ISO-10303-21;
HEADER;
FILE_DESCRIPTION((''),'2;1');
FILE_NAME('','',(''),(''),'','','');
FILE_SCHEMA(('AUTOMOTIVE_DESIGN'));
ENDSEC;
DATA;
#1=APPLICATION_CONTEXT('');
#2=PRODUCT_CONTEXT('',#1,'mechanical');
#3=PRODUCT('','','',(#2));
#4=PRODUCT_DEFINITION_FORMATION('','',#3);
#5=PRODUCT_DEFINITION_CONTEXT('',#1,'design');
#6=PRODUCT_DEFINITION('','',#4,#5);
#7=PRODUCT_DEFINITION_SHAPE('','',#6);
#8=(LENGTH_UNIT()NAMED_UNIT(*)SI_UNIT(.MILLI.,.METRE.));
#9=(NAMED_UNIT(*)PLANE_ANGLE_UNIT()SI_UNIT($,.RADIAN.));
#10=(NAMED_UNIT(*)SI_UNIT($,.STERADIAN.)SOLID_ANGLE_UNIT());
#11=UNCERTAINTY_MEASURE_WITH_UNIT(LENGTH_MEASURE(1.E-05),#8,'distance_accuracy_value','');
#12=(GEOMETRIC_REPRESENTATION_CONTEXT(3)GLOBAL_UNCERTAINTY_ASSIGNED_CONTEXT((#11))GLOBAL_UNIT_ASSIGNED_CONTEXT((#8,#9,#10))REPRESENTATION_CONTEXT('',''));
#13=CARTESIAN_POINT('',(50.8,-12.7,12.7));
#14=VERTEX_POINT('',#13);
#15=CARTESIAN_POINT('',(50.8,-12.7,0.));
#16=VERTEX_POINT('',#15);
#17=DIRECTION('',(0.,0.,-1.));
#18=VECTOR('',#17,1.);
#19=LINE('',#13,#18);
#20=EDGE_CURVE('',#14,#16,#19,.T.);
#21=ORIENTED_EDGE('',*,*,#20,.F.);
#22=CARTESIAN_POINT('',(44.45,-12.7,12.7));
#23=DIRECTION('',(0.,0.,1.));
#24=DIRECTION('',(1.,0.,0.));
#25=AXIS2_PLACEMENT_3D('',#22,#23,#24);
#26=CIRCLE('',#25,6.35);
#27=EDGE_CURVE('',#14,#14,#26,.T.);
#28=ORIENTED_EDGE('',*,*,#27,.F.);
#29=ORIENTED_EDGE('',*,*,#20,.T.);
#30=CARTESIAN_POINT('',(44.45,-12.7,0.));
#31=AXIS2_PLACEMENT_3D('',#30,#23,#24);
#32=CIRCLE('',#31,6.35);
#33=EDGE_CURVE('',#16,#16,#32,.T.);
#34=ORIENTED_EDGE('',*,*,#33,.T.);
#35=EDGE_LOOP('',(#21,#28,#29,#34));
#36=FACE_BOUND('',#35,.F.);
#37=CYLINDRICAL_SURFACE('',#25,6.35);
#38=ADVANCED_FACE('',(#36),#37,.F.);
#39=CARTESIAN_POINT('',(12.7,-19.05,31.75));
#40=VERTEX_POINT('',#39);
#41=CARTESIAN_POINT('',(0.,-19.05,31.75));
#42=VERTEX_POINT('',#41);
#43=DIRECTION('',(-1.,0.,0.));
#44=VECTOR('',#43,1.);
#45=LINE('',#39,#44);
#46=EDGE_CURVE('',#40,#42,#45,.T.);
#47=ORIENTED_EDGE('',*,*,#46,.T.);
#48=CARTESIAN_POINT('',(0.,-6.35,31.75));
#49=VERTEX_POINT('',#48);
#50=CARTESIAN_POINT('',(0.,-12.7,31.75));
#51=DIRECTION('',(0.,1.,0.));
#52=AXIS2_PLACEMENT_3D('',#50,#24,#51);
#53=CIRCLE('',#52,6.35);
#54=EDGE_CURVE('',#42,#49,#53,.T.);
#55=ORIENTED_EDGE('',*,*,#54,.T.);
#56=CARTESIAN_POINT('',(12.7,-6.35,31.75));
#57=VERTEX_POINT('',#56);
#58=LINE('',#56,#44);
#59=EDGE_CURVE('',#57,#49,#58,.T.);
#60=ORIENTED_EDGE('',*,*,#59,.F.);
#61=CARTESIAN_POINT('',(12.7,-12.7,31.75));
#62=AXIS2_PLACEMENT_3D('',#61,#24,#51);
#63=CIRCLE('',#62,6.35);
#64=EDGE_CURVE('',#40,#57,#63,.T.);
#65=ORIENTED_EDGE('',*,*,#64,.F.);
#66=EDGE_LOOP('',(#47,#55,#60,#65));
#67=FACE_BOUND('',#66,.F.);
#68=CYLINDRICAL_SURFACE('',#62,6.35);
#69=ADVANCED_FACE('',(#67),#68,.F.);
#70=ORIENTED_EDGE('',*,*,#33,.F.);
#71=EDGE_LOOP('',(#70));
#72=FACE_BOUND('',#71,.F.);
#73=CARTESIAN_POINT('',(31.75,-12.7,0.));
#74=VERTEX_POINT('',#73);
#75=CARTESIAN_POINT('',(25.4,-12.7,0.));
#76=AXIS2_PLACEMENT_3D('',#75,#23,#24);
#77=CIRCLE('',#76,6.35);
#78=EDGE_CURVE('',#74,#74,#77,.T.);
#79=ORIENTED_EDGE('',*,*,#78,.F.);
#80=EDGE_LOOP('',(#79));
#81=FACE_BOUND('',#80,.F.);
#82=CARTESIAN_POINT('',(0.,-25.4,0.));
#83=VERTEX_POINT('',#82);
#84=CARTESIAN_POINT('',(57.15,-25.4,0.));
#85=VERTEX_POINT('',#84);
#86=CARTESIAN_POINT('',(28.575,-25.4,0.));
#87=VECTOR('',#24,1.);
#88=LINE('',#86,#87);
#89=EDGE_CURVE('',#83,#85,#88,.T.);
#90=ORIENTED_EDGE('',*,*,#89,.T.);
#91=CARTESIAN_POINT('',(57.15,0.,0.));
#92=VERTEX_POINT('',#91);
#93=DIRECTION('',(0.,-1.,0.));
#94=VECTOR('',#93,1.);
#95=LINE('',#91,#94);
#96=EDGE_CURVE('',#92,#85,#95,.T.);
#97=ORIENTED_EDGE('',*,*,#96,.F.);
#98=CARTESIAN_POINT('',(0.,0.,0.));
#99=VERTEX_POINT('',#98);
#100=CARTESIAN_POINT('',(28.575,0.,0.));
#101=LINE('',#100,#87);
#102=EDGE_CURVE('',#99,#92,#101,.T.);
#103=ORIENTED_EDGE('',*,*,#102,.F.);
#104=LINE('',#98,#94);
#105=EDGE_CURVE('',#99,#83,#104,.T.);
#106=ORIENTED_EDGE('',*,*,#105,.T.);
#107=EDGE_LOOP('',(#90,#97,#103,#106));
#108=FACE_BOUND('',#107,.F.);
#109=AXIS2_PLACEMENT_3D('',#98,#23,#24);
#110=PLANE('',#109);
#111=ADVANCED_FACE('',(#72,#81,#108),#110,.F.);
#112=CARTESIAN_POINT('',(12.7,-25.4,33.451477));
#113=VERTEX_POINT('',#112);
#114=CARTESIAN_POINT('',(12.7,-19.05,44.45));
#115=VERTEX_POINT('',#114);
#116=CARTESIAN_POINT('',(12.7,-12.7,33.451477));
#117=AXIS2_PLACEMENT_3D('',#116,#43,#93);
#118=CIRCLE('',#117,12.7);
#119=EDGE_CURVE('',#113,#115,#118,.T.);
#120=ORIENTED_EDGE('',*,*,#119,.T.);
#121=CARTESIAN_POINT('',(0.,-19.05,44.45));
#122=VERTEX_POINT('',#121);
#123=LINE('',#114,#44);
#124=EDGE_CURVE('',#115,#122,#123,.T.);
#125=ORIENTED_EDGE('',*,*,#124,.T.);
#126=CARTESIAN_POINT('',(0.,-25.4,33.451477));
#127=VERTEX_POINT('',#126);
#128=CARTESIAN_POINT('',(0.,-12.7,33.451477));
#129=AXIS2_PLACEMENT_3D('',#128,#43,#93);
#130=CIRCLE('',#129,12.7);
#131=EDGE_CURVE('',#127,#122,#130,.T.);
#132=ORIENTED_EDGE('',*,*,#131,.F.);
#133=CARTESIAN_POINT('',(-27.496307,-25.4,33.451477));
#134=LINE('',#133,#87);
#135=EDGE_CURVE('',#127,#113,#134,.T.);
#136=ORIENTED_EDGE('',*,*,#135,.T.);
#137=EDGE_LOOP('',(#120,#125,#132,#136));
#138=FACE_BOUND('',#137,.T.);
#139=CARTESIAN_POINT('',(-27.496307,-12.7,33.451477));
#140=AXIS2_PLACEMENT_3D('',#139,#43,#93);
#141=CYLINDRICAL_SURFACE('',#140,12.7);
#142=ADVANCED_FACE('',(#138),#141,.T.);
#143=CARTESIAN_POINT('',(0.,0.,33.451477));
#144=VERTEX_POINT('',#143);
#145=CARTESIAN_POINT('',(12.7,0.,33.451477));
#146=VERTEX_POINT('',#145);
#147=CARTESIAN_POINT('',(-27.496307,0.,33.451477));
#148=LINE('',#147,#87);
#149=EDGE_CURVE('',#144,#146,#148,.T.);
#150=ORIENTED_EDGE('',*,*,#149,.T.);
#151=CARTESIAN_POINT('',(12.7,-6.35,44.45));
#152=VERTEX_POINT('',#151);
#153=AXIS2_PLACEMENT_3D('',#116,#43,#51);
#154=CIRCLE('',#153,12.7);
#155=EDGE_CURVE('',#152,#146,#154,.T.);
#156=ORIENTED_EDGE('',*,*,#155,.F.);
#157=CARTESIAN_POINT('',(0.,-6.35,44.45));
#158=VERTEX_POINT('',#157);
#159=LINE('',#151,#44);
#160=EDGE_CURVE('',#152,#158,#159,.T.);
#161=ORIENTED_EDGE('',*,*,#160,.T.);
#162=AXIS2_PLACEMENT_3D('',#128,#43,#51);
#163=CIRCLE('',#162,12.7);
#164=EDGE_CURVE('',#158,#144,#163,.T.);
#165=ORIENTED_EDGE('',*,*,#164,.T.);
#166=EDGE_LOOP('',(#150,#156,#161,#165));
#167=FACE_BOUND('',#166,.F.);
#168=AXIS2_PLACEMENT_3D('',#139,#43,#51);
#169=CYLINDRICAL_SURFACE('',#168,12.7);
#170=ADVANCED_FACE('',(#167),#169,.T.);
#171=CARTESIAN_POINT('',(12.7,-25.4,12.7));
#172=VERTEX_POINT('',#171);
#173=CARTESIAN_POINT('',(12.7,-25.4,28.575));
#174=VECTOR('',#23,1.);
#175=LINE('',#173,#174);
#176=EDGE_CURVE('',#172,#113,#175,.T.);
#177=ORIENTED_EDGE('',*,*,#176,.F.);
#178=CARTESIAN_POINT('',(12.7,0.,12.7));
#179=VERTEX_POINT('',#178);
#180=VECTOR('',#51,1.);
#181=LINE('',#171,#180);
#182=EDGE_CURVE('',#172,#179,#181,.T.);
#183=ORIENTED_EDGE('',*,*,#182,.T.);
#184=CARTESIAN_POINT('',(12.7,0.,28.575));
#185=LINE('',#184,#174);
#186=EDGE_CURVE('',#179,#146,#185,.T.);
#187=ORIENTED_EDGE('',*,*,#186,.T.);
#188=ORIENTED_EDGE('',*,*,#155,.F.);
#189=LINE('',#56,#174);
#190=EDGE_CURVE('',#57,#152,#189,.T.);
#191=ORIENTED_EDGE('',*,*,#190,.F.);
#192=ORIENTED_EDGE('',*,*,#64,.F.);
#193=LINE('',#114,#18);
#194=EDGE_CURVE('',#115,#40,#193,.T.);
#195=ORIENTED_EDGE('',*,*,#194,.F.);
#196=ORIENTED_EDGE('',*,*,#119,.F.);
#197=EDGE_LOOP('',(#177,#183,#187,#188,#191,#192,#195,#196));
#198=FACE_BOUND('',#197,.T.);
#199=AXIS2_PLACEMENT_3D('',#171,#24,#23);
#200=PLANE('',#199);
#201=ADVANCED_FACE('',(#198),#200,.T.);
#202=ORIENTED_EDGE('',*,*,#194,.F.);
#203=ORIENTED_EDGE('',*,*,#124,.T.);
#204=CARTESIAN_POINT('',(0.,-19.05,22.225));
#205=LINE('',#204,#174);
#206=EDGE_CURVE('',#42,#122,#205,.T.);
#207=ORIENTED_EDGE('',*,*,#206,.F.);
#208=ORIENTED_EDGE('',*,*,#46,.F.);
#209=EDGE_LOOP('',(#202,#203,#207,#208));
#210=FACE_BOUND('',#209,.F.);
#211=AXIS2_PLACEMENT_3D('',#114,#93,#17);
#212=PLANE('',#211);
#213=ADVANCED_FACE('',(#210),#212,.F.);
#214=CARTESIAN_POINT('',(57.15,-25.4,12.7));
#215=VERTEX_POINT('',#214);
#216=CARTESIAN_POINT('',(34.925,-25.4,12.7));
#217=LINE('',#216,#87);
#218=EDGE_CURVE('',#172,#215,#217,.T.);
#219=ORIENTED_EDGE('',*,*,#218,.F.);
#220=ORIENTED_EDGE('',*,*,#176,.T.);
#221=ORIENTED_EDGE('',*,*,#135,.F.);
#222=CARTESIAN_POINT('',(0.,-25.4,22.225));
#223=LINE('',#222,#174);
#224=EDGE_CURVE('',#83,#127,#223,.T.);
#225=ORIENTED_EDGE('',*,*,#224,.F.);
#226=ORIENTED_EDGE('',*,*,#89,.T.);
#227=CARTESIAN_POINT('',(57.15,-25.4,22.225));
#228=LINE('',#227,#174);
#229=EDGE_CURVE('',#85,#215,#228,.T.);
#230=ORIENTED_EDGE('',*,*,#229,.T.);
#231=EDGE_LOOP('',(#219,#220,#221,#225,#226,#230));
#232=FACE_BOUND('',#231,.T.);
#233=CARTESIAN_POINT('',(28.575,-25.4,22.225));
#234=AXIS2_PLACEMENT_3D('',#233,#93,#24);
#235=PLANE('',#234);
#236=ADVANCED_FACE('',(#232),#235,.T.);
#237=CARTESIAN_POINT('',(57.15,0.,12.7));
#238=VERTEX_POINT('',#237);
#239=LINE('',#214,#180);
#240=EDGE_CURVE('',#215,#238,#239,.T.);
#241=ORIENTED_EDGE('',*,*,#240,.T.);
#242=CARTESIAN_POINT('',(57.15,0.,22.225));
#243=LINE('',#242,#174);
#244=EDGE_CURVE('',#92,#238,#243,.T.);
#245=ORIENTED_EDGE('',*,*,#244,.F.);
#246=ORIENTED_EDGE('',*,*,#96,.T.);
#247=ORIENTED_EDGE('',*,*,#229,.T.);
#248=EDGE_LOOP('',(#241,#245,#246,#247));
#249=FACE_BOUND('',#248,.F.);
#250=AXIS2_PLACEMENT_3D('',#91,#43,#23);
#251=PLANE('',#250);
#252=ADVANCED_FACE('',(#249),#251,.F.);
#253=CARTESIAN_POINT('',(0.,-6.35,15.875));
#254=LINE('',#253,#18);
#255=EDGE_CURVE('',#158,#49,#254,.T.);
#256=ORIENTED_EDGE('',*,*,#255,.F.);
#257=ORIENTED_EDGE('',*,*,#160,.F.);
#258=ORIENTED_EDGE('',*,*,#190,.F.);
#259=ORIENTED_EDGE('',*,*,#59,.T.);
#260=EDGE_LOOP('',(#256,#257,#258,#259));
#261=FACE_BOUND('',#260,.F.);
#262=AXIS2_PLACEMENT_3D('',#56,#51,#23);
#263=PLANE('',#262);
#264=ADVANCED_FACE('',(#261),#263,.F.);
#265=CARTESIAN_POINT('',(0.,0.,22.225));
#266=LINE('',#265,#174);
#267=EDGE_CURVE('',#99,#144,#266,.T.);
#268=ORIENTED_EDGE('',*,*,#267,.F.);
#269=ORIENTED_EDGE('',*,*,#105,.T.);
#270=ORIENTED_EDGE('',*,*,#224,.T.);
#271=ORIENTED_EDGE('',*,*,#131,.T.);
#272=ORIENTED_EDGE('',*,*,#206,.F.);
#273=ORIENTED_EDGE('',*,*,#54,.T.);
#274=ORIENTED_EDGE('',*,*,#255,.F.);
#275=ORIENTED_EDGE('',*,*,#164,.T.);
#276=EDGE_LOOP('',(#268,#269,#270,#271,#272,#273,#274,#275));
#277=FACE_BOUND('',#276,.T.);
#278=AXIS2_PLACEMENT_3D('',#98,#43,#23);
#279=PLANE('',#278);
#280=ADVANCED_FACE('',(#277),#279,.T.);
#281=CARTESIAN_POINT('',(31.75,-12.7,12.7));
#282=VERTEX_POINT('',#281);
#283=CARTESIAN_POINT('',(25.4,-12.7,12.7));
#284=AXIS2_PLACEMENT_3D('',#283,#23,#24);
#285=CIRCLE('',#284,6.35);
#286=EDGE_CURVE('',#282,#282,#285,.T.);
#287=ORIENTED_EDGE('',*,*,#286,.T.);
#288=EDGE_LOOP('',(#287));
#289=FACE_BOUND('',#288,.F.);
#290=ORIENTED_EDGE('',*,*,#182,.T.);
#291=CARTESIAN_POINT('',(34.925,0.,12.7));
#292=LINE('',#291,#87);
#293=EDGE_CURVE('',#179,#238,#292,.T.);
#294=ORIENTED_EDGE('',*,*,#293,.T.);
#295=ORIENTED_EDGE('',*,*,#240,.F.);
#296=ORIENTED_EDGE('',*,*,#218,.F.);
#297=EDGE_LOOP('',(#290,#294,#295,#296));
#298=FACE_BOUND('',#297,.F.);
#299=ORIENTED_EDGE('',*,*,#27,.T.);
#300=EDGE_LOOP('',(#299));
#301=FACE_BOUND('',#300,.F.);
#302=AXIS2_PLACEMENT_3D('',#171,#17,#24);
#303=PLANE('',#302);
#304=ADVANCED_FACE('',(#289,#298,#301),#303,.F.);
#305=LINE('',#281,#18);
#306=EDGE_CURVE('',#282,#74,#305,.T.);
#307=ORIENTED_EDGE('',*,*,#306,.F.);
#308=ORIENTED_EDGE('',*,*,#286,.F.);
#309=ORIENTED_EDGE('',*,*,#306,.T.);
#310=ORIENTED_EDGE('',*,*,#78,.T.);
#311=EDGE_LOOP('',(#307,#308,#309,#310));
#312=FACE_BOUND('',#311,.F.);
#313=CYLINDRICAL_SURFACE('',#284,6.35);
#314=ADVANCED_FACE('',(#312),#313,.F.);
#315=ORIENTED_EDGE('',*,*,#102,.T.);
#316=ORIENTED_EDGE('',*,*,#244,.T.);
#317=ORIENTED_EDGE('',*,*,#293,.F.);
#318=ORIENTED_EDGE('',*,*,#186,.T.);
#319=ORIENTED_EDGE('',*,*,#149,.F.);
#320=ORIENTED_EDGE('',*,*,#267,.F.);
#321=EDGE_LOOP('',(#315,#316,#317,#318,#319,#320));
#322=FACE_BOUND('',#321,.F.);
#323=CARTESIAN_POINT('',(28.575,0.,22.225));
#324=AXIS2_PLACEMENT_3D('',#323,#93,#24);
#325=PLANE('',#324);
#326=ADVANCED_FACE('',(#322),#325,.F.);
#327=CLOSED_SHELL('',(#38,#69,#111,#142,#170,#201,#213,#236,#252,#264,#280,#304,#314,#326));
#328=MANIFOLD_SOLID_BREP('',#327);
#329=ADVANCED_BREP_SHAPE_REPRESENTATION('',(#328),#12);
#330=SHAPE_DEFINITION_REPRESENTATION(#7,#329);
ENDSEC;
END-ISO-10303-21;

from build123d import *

# Parameters (mm, degrees)
F0_W        = 57.15
F0_H        = 44.45
F1_DEPTH    = 25.4
F2_W        = 44.45
F2_H        = 31.75
F3_DEPTH    = 25.4
F4_R        = 6.35
F5_DEPTH    = 25.4
F7_DEPTH    = 25.4
F8_T1_DEPTH = 67.6926131403


# Not quite as in the source:
# - a fillet or chamfer that OpenCascade refuses, or shapes differently, is made with other operations: its cross-section is extruded or revolved along the edge and cut away or added


with BuildPart() as f1:
    # F0 (on Front) → F1 (new body)
    with BuildSketch(Plane.XZ):
        with Locations((28.575, 22.225)):
            Rectangle(F0_W, F0_H)
    extrude(amount=F1_DEPTH)

    # F2 (on face) → F3 (cut)
    with BuildSketch(Plane.XZ.offset(25.4)):
        with Locations((34.925, 28.575)):
            Rectangle(F2_W, F2_H)
    extrude(amount=-F3_DEPTH, mode=Mode.SUBTRACT)

    # F4 (on face) → F5 (cut)
    with BuildSketch(Plane.XY.offset(12.7)):
        with Locations((25.4, -12.7)):
            Circle(F4_R)
        with Locations((44.45, -12.7)):
            Circle(F4_R)
    extrude(amount=-F5_DEPTH, mode=Mode.SUBTRACT)

    # F6 (on face) → F7 (cut)
    with BuildSketch(Plane.YZ.offset(12.7)):
        with BuildLine():
            ThreePointArc((-19.05, 31.75), (-12.7, 38.1), (-6.35, 31.75))
            Line((-6.35, 31.75), (-6.35, 44.45))
            Line((-6.35, 44.45), (-19.05, 44.45))
            Line((-19.05, 44.45), (-19.05, 31.75))
        make_face()
        with BuildLine():
            ThreePointArc((-19.05, 31.75), (-12.7, 25.4), (-6.35, 31.75))
            ThreePointArc((-6.35, 31.75), (-12.7, 38.1), (-19.05, 31.75))
        make_face()
    extrude(amount=-F7_DEPTH, mode=Mode.SUBTRACT)

    # F8: fillet of radius 12.7 on 2 edges, made by hand

    # F8_s2 → F8_t1 (cut)
    with BuildSketch(Plane.YZ.offset(-27.4963065702)):
        with BuildLine():
            ThreePointArc((-25.4, 33.4514773719), (-23.6985226281, 39.8014773719), (-19.05, 44.45))
            Line((-19.05, 44.45), (-25.4, 44.45))
            Line((-25.4, 44.45), (-25.4, 33.4514773719))
        make_face()
        with BuildLine():
            ThreePointArc((0, 33.4514773719), (-1.7014773719, 39.8014773719), (-6.35, 44.45))
            Line((-6.35, 44.45), (0, 44.45))
            Line((0, 44.45), (0, 33.4514773719))
        make_face()
    extrude(amount=F8_T1_DEPTH, mode=Mode.SUBTRACT)


solid = f1.part
